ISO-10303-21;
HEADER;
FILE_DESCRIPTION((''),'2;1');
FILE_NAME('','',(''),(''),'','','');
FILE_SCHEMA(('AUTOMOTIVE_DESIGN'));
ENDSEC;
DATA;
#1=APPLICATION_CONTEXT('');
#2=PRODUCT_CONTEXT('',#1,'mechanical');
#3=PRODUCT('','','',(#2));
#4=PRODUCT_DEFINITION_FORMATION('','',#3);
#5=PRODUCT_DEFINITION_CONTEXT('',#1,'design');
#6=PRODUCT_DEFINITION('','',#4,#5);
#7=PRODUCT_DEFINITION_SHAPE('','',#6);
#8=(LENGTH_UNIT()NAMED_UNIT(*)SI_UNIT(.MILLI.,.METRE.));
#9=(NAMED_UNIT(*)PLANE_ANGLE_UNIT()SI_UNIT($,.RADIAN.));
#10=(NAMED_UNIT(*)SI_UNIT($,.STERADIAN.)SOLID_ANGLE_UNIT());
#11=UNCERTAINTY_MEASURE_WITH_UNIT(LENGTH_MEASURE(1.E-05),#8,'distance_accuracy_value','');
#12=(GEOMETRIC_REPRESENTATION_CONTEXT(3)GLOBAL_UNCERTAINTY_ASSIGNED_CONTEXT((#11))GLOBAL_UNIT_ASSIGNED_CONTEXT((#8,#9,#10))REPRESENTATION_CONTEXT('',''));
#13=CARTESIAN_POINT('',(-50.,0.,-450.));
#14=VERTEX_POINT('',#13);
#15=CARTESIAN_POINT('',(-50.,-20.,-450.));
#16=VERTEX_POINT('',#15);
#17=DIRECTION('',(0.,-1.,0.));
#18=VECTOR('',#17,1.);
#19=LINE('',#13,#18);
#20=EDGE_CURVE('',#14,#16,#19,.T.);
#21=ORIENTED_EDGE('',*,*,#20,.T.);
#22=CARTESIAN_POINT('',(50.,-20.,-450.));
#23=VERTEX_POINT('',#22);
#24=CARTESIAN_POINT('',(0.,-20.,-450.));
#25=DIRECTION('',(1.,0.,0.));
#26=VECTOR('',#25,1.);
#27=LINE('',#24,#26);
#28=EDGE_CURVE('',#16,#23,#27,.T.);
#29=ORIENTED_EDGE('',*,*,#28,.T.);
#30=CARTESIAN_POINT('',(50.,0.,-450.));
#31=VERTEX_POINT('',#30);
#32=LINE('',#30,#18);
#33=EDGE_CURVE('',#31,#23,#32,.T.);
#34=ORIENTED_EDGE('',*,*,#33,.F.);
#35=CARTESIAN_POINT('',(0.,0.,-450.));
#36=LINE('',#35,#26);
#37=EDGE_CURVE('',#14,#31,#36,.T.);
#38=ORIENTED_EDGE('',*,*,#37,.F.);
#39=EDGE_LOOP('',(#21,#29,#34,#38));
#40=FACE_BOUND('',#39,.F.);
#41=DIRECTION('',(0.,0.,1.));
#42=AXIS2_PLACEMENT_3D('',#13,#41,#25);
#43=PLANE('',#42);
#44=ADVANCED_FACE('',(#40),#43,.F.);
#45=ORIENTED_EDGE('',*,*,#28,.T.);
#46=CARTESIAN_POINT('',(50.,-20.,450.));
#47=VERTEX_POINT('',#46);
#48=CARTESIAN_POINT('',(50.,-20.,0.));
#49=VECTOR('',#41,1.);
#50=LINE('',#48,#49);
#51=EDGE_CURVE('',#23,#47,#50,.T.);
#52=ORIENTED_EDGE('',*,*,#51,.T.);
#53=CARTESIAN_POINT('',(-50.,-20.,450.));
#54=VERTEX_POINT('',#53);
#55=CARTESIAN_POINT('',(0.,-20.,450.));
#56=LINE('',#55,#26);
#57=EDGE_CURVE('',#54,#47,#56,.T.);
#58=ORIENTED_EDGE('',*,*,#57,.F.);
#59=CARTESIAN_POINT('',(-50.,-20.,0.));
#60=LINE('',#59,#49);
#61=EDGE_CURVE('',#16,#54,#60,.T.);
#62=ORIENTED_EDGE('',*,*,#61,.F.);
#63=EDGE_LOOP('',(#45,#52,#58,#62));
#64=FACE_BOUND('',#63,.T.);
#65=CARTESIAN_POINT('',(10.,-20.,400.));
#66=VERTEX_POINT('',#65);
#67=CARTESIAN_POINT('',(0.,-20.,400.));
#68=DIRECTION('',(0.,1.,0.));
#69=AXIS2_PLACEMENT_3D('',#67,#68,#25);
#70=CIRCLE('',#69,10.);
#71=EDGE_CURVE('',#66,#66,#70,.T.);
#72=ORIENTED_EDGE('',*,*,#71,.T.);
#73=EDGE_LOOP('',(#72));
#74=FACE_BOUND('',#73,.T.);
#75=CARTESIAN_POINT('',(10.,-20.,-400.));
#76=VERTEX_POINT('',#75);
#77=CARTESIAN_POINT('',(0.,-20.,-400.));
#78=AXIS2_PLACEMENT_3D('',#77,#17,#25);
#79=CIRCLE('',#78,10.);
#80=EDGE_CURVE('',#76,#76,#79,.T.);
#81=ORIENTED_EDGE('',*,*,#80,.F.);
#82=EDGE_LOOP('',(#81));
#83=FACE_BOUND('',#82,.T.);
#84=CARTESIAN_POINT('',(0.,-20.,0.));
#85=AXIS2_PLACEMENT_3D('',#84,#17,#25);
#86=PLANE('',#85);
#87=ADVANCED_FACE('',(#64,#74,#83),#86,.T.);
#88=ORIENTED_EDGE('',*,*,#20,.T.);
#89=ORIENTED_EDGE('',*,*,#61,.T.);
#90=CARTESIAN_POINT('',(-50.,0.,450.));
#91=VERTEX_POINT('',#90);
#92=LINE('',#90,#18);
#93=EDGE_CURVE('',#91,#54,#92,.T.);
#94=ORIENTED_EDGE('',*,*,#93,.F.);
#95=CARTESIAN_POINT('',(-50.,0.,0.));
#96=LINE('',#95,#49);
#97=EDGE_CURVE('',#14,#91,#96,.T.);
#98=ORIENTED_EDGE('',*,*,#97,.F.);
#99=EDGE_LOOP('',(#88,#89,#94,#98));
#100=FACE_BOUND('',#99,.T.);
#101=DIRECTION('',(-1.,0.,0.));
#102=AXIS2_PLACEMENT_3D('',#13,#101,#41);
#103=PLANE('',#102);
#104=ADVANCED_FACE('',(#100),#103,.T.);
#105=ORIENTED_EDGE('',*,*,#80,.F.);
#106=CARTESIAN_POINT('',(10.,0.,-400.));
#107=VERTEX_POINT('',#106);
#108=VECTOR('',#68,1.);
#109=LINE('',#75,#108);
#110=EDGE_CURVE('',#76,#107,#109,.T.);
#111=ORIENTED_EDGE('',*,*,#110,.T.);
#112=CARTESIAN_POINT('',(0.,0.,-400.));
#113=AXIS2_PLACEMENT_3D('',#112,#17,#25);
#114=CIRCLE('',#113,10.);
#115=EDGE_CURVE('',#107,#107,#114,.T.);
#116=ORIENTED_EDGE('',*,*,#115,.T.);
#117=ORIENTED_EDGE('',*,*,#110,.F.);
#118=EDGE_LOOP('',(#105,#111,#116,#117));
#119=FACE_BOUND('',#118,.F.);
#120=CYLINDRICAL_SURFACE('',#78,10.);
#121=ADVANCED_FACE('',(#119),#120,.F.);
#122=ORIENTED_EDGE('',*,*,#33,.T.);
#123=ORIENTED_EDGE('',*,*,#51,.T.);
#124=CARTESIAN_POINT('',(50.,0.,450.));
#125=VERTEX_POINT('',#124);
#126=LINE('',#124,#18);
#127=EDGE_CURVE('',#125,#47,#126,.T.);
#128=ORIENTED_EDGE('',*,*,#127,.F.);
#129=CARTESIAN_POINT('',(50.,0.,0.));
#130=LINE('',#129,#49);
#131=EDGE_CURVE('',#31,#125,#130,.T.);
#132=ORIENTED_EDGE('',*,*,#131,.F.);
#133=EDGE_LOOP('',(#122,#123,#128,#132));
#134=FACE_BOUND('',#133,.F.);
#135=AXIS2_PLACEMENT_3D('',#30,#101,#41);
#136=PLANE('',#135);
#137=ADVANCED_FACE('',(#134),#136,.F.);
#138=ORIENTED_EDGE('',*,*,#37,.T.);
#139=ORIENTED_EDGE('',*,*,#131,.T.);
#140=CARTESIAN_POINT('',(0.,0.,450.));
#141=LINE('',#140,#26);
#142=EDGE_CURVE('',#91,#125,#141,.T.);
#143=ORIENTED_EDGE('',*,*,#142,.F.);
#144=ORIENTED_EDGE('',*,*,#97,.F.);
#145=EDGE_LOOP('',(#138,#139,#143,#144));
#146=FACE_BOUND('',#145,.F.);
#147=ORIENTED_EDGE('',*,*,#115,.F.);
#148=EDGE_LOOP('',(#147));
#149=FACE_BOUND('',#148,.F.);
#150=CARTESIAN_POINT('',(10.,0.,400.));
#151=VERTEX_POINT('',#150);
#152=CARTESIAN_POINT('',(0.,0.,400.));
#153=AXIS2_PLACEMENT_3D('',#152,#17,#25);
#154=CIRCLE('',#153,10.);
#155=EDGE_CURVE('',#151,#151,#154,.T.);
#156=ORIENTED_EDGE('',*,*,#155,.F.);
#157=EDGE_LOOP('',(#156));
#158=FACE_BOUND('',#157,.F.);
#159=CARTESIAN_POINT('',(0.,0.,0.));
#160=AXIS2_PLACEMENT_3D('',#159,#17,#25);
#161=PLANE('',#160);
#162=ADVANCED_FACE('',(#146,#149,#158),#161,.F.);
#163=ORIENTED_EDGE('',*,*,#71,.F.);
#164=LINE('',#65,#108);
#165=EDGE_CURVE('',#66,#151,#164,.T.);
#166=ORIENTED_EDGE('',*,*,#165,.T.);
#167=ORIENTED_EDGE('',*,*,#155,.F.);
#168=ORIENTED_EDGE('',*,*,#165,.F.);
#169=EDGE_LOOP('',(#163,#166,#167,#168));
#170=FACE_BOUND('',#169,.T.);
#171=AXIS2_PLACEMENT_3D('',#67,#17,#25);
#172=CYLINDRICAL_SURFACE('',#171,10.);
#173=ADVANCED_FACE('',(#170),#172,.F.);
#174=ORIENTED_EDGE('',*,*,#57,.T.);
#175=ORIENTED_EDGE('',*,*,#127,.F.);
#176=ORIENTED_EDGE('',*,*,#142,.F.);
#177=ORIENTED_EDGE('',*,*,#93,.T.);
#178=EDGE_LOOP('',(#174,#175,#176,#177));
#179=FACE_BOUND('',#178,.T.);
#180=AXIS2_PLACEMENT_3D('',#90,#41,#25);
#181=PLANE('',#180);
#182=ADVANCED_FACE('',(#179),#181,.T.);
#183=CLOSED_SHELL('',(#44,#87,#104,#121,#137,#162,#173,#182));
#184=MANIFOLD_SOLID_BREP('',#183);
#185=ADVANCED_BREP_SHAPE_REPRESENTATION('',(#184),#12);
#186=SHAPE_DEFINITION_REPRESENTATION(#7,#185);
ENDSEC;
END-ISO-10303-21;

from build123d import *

# Parameters (mm, degrees)
F0_W     = 100
F0_H     = 900
F1_DEPTH = 20
F2_R     = 10
F3_DEPTH = 25


# Not quite as in the source:
# - a pattern or mirror of a feature is missing from the dataset's text; its kind, count and spacing are read off the source's solid


with BuildPart() as f1:
    # F0 (on Front) → F1 (new body)
    with BuildSketch(Plane.XZ):
        Rectangle(F0_W, F0_H)
    extrude(amount=F1_DEPTH)

    # F2 (on face) → F3 (cut)
    with BuildSketch(Plane.XZ.offset(20)):
        with Locations((0, -400)):
            Circle(F2_R)
    f3 = extrude(amount=-F3_DEPTH, mode=Mode.SUBTRACT)

    # F3_copies: F3 across plane
    add(f3.mirror(Plane.XY), mode=Mode.SUBTRACT)


solid = f1.part
